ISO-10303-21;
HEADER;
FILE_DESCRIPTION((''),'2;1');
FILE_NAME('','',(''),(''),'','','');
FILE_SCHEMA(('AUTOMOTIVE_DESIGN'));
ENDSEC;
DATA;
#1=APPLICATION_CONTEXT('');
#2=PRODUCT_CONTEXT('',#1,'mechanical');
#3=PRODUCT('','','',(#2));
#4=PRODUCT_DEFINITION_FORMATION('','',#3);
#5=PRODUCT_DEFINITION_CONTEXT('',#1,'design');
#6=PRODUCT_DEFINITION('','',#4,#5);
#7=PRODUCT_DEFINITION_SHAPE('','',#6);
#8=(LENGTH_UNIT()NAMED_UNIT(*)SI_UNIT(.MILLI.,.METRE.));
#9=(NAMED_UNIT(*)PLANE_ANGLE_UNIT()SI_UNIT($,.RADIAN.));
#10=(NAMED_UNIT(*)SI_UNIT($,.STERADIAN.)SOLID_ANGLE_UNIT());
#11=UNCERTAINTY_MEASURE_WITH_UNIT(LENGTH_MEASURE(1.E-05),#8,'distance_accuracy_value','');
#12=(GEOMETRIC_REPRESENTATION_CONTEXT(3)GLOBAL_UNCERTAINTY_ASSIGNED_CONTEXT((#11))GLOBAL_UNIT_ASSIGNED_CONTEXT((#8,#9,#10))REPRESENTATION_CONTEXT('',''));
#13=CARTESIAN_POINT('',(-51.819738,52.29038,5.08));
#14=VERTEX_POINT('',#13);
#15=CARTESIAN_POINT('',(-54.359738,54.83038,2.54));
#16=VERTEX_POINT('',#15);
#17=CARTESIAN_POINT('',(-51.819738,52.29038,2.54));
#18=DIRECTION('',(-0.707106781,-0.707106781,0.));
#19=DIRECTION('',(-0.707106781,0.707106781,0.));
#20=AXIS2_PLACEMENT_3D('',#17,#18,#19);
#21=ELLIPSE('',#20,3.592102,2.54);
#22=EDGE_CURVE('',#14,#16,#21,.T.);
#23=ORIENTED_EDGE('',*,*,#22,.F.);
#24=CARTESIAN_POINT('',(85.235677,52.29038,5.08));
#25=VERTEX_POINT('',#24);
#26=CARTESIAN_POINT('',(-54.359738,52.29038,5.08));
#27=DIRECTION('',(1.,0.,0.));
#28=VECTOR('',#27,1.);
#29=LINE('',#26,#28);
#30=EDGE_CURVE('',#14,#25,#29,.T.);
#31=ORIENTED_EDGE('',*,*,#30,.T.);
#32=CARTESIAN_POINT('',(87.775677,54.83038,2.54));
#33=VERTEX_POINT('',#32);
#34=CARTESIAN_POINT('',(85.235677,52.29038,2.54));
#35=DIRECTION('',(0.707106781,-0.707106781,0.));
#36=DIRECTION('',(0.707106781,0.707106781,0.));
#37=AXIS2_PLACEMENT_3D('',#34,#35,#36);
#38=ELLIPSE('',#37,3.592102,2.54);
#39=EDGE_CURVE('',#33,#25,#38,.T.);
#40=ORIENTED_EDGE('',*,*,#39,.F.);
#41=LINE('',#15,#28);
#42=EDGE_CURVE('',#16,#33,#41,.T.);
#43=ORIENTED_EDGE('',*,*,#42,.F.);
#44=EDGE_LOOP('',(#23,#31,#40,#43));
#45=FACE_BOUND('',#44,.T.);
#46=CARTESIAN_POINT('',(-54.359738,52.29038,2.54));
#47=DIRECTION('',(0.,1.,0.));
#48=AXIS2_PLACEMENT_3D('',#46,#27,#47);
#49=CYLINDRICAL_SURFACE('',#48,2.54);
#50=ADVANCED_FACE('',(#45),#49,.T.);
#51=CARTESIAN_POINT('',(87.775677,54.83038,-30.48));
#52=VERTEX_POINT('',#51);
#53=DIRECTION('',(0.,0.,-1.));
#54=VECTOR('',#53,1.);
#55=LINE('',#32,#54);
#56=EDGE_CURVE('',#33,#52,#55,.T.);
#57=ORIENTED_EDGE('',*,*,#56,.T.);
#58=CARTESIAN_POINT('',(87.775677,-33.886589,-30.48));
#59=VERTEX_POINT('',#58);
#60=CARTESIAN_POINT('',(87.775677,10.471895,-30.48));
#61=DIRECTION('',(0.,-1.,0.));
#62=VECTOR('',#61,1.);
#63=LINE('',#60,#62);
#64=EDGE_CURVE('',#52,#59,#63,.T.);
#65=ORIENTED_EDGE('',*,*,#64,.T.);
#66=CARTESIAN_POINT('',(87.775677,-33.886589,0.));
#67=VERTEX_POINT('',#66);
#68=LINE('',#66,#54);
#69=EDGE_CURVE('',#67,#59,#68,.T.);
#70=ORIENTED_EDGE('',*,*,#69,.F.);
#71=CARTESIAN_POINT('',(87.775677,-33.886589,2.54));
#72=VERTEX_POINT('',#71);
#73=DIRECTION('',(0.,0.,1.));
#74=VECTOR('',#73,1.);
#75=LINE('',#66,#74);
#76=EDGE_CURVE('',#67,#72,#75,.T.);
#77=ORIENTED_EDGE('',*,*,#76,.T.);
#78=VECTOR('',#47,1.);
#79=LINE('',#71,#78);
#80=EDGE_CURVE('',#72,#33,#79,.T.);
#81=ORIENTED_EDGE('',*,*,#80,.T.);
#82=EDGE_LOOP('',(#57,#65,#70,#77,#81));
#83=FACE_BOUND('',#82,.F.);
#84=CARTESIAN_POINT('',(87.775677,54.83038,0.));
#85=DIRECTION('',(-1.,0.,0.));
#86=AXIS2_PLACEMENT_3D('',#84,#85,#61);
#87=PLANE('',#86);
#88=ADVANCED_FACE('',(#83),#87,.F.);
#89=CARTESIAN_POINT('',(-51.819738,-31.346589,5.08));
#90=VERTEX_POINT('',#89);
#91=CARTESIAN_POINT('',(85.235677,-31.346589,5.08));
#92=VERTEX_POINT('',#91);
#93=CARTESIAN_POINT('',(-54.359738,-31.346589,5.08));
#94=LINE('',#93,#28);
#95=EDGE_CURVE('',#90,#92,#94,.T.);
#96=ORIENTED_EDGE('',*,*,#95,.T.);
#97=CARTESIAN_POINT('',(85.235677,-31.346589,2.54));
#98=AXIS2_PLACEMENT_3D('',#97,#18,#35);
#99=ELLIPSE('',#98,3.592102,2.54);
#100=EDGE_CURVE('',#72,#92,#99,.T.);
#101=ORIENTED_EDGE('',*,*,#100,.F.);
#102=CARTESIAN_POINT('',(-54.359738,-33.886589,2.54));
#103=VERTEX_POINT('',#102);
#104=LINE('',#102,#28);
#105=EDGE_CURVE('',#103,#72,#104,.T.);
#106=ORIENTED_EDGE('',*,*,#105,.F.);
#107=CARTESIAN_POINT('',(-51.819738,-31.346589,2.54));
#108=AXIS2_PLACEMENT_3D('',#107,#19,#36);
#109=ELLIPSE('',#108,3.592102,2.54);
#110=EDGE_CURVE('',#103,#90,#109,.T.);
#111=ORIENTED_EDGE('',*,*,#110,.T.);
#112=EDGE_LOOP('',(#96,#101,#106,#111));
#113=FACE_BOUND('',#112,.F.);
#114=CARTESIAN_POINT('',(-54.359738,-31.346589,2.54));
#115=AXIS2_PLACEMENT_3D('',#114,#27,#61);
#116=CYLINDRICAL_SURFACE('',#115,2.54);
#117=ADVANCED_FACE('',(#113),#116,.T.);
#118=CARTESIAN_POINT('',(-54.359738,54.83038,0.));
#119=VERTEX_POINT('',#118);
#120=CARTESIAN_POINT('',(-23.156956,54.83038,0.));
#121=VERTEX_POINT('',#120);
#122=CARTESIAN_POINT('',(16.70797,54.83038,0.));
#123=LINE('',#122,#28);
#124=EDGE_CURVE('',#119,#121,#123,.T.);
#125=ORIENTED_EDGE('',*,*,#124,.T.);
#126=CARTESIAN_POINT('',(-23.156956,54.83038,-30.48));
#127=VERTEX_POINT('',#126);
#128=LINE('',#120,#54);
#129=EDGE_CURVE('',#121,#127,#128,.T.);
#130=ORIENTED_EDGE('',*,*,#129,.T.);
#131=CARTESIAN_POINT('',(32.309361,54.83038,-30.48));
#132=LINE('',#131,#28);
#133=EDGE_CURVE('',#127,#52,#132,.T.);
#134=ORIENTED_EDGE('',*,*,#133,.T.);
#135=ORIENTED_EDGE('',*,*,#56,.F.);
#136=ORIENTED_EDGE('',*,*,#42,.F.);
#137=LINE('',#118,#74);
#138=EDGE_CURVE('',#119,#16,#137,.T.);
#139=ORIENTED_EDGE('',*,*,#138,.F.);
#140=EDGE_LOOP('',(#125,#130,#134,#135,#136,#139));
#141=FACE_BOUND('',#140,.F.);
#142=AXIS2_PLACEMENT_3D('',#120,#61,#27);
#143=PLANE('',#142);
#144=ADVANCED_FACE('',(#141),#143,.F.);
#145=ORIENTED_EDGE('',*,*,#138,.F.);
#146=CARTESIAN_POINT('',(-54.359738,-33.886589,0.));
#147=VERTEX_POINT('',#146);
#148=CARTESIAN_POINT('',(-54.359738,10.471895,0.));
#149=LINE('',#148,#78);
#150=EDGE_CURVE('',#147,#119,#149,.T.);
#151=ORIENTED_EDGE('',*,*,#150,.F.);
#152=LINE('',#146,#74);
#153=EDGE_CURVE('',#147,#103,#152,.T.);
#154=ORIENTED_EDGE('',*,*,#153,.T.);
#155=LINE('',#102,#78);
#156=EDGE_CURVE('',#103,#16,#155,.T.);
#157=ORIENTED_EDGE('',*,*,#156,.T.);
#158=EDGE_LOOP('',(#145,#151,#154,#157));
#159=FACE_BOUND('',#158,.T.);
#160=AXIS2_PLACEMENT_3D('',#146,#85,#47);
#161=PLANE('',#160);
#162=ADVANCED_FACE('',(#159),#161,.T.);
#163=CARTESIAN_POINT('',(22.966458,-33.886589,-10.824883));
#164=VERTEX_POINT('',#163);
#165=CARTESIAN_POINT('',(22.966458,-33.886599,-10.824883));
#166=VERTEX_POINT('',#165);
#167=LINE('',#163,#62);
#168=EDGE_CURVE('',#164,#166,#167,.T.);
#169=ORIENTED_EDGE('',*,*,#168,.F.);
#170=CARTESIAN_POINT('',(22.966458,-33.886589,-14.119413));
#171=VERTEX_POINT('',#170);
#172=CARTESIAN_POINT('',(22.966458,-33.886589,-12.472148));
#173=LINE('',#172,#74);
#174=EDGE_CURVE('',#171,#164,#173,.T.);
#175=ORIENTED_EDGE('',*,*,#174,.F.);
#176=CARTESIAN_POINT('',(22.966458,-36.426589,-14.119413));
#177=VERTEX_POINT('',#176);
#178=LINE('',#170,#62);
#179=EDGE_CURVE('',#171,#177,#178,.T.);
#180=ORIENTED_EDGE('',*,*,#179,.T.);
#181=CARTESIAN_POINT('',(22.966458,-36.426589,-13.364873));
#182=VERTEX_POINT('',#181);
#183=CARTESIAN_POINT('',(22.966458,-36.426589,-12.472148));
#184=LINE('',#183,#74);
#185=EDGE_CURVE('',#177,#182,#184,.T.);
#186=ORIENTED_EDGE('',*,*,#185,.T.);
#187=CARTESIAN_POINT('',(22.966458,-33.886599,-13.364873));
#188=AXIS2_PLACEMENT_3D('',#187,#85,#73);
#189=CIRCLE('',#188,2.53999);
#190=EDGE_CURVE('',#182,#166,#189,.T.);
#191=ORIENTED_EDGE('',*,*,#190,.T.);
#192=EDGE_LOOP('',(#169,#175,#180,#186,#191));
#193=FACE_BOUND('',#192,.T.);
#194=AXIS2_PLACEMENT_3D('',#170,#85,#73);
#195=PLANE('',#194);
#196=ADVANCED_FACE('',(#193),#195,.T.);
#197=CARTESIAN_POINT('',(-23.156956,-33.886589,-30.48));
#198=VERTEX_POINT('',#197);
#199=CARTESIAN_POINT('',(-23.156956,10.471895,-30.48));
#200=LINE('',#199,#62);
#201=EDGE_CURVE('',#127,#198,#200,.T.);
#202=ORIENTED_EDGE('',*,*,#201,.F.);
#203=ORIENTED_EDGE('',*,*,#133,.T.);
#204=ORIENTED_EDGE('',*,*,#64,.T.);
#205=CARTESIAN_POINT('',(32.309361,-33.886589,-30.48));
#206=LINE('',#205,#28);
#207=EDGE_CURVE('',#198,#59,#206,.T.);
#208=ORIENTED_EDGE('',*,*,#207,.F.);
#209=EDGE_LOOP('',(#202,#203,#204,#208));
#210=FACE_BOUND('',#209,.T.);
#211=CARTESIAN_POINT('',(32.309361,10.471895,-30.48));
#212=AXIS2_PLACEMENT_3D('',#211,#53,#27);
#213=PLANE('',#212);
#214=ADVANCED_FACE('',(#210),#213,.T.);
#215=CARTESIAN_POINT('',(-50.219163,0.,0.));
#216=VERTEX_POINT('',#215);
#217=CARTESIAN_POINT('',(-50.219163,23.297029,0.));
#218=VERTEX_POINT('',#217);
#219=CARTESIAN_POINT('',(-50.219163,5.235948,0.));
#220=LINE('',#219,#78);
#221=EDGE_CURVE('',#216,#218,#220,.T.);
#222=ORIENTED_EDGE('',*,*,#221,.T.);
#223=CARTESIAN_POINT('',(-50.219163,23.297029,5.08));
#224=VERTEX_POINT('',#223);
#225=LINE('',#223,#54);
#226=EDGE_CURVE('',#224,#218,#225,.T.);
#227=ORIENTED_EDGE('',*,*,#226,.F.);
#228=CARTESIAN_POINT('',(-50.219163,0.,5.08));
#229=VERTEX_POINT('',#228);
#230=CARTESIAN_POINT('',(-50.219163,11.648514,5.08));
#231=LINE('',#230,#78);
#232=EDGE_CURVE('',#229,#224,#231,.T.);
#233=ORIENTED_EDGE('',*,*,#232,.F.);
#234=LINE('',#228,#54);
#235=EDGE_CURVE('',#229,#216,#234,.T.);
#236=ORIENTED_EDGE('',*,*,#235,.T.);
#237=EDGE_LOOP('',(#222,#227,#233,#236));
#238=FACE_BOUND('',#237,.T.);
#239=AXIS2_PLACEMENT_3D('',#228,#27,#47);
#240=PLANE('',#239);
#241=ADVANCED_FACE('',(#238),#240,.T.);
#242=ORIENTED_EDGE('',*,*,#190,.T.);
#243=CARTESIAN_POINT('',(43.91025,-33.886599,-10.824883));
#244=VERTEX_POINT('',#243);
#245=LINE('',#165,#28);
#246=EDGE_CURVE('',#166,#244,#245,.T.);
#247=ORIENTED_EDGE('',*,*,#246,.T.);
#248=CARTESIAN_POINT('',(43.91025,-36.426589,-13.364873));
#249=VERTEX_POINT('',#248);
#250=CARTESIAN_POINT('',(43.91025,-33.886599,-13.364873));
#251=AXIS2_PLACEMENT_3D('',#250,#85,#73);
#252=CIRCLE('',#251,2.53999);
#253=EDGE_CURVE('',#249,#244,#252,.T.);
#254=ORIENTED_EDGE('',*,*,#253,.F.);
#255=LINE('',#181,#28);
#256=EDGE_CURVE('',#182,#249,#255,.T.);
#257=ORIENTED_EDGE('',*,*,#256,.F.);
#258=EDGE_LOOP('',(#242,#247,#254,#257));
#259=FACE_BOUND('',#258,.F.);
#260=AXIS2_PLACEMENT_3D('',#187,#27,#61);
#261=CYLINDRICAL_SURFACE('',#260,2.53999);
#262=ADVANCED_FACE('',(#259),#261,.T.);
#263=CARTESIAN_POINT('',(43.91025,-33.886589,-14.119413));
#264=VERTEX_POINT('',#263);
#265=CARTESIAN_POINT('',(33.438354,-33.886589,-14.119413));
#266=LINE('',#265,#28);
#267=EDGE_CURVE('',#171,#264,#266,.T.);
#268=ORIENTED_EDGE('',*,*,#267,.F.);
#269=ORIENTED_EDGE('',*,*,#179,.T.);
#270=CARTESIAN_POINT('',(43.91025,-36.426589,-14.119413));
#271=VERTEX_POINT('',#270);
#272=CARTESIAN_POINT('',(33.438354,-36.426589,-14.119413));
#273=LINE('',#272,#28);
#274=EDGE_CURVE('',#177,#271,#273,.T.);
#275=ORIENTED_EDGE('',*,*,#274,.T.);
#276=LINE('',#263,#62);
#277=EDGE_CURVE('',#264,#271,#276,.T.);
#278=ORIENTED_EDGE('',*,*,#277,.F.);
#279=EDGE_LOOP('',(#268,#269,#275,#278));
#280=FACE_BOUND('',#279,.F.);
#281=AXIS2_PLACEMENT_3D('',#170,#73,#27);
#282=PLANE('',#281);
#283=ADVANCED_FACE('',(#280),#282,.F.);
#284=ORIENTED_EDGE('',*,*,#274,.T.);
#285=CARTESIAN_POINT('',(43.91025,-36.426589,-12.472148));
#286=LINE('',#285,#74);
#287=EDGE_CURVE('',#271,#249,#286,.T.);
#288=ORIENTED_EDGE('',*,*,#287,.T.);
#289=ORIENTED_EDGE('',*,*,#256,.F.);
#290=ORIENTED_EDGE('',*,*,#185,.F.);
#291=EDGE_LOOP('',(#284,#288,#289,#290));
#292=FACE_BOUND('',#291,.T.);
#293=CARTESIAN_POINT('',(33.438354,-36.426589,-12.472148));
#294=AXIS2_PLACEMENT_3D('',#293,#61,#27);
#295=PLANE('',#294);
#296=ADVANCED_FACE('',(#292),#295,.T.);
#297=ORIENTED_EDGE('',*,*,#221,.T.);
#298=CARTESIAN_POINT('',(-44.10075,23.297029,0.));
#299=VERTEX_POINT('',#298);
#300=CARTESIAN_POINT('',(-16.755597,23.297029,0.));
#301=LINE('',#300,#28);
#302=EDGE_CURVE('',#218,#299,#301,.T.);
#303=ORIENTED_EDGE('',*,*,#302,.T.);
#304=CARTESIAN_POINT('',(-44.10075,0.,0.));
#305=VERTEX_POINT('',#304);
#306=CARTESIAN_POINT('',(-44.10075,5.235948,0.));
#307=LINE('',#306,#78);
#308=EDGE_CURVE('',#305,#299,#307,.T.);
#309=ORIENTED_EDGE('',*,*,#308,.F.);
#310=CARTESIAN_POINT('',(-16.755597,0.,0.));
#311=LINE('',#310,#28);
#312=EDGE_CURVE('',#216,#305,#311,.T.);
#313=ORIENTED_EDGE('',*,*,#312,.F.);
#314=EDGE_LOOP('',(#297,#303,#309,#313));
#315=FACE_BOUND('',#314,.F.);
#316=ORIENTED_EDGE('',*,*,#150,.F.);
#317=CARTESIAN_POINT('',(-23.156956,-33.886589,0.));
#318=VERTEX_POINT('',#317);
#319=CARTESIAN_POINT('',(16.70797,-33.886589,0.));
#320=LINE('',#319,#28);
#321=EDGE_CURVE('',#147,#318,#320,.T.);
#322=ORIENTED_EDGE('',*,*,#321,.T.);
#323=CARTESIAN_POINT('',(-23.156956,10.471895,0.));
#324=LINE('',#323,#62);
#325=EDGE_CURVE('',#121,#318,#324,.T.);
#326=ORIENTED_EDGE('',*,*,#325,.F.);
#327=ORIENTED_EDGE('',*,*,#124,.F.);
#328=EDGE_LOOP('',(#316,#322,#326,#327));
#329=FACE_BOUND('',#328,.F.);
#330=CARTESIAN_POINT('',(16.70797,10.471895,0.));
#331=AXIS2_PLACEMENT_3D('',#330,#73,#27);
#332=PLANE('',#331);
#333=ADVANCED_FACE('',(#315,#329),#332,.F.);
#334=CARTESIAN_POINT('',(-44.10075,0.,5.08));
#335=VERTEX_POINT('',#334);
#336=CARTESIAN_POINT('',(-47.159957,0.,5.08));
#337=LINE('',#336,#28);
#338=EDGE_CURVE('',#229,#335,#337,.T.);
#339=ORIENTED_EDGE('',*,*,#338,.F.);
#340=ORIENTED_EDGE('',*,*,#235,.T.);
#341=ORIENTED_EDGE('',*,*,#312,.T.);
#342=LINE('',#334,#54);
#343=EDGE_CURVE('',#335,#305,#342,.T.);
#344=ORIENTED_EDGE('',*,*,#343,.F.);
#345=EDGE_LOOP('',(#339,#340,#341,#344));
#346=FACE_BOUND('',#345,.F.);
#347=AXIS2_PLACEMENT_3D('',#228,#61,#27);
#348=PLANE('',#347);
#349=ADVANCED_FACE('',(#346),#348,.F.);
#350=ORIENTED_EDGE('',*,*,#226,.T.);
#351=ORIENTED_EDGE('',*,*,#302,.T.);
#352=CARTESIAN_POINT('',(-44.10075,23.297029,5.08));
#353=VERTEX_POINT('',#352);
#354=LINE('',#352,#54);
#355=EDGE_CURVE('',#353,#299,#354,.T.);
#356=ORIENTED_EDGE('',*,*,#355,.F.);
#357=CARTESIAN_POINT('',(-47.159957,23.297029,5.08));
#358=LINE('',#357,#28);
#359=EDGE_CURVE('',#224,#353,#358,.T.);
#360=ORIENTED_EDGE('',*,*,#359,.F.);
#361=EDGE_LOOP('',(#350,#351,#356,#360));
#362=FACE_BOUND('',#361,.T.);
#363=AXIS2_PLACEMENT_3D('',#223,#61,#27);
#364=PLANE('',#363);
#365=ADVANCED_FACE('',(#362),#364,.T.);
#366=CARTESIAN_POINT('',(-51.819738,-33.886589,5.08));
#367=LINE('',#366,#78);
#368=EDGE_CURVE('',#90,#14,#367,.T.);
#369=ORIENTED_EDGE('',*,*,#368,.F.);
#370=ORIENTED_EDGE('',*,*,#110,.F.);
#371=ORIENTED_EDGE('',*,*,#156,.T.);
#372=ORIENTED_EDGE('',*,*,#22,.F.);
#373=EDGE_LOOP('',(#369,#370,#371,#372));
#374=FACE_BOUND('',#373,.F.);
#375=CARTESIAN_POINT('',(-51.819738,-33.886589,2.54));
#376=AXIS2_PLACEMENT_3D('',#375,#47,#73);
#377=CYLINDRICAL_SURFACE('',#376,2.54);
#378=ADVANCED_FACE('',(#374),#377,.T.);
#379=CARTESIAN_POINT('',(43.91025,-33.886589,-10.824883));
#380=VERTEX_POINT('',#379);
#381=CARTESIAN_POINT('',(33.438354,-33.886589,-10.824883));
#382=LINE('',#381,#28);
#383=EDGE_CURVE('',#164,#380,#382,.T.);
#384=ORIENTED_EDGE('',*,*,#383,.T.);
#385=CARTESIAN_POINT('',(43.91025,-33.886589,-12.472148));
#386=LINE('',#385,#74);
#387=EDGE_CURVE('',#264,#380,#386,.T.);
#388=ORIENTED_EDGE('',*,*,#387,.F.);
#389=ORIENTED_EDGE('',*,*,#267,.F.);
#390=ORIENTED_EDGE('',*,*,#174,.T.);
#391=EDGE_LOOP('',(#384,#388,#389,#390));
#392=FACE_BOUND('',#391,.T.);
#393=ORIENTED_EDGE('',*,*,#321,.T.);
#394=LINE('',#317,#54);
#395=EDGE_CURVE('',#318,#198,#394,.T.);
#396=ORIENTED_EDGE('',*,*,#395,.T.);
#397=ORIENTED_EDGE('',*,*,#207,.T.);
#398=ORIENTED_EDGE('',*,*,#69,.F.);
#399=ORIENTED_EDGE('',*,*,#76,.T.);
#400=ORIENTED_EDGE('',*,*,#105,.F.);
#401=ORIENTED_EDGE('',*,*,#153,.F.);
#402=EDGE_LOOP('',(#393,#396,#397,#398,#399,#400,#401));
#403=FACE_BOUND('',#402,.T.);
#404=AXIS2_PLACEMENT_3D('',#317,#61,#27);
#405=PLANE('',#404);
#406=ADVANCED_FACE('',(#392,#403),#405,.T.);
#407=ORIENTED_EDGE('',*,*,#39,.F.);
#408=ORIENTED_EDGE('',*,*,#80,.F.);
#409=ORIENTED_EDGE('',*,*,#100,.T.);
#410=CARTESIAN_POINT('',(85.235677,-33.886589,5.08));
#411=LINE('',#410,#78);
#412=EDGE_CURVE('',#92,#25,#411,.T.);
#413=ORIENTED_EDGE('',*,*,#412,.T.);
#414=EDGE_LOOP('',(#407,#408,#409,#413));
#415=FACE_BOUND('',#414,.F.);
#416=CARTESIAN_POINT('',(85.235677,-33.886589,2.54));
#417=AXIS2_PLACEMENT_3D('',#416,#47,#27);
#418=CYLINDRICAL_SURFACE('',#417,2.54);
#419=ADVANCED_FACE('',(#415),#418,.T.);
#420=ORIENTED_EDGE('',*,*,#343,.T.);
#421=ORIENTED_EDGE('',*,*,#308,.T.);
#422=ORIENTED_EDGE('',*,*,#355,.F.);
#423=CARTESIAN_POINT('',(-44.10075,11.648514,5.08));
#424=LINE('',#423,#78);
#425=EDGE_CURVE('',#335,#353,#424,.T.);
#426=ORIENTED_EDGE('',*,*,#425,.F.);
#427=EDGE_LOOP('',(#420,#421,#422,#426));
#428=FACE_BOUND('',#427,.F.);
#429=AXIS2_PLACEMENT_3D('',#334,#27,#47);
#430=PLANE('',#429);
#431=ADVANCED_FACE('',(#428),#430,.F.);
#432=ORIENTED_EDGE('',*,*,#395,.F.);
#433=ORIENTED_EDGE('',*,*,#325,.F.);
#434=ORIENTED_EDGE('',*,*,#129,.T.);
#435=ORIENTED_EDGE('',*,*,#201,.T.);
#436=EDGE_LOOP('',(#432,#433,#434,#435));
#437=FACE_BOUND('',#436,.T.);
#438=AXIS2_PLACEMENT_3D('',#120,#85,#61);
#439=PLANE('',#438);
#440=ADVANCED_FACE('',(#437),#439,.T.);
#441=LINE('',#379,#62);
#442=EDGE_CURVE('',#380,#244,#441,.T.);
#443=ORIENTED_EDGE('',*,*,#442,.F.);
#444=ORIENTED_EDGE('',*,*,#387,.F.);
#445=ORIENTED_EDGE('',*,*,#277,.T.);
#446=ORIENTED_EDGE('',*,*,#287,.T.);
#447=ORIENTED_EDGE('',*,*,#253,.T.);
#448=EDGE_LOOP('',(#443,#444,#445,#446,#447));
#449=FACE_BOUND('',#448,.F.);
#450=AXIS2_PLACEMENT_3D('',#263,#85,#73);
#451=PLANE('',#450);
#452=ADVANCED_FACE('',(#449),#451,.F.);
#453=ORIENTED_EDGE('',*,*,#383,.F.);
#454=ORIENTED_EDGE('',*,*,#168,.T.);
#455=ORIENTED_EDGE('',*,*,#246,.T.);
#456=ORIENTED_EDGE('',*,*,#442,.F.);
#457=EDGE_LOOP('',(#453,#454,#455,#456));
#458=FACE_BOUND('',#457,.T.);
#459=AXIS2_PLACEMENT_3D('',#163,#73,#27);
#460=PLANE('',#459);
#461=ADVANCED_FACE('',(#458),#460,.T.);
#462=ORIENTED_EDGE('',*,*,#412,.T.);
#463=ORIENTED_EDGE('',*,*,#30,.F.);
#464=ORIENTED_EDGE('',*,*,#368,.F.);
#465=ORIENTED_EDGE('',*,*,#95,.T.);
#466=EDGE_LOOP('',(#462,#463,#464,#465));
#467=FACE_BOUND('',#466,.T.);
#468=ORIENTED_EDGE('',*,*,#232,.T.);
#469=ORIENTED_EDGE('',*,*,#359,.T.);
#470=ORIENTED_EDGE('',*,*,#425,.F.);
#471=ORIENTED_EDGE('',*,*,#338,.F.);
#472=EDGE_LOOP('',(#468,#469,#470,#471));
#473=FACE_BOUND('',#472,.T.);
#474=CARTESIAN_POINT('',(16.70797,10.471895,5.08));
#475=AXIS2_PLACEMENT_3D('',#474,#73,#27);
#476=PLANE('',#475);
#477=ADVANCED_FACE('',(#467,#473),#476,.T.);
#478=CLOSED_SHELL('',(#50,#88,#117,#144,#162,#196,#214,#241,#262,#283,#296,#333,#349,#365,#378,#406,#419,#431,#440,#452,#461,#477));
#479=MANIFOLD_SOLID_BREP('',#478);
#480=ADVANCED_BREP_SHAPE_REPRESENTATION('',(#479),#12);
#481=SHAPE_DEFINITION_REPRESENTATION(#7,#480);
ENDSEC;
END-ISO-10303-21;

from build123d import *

# Parameters (mm, degrees)
F0_W     = 142.1354152262
F0_H     = 88.716968894
F1_DEPTH = 5.08
F2_W     = 6.1184130609
F2_H     = 23.2970286161
F3_DEPTH = 25.4
F4_W     = 110.9326332808
F4_H     = 88.716968894
F5_DEPTH = 30.48
F6_W     = 20.9437925369
F6_H     = 3.2945293933
F7_DEPTH = 2.54
F8_R     = 2.54
F9_R     = 2.53999


# Not quite as in the source:
# - a fillet or chamfer is up to 0.001 mm smaller than in the source, because OpenCascade refuses the exact size


with BuildPart() as f1:
    # F0 (on Top) → F1 (new body)
    with BuildSketch(Plane.XY):
        with Locations((16.7079698294, 10.4718953371)):
            Rectangle(F0_W, F0_H)
    extrude(amount=F1_DEPTH)

    # F2 (on face) → F3 (cut)
    with BuildSketch(Plane.XY.offset(5.08)):
        with Locations((-47.1599567682, 11.648514308)):
            Rectangle(F2_W, F2_H)
    extrude(amount=-F3_DEPTH, mode=Mode.SUBTRACT)

    # F4 (on face) → F5 (join)
    with BuildSketch(Plane(origin=(0, 0, 0), x_dir=(1, 0, 0), z_dir=(0, 0, -1))):
        with Locations((32.3093608022, -10.4718953371)):
            Rectangle(F4_W, F4_H)
    extrude(amount=F5_DEPTH)

    # F6 (on face) → F7 (join)
    with BuildSketch(Plane.XZ.offset(33.8865891099)):
        with Locations((33.4383537993, -12.4721480533)):
            Rectangle(F6_W, F6_H)
    extrude(amount=F7_DEPTH)

    # F8
    f8_edges = [f1.edges().sort_by_distance(p)[0] for p in [
        (16.70797, -33.886589, 5.08),
        (-54.359738, 10.471895, 5.08),
        (16.70797, 54.83038, 5.08),
        (87.775677, 10.471895, 5.08),
    ]]
    fillet(f8_edges, radius=F8_R)

    # F9 (radius 2.54 in the source; OpenCascade refuses exactly that, so slightly less here)
    f9_edges = [f1.edges().sort_by_distance(p)[0] for p in [
        (33.438354, -36.426589, -10.824883),
    ]]
    fillet(f9_edges, radius=F9_R)


solid = f1.part
